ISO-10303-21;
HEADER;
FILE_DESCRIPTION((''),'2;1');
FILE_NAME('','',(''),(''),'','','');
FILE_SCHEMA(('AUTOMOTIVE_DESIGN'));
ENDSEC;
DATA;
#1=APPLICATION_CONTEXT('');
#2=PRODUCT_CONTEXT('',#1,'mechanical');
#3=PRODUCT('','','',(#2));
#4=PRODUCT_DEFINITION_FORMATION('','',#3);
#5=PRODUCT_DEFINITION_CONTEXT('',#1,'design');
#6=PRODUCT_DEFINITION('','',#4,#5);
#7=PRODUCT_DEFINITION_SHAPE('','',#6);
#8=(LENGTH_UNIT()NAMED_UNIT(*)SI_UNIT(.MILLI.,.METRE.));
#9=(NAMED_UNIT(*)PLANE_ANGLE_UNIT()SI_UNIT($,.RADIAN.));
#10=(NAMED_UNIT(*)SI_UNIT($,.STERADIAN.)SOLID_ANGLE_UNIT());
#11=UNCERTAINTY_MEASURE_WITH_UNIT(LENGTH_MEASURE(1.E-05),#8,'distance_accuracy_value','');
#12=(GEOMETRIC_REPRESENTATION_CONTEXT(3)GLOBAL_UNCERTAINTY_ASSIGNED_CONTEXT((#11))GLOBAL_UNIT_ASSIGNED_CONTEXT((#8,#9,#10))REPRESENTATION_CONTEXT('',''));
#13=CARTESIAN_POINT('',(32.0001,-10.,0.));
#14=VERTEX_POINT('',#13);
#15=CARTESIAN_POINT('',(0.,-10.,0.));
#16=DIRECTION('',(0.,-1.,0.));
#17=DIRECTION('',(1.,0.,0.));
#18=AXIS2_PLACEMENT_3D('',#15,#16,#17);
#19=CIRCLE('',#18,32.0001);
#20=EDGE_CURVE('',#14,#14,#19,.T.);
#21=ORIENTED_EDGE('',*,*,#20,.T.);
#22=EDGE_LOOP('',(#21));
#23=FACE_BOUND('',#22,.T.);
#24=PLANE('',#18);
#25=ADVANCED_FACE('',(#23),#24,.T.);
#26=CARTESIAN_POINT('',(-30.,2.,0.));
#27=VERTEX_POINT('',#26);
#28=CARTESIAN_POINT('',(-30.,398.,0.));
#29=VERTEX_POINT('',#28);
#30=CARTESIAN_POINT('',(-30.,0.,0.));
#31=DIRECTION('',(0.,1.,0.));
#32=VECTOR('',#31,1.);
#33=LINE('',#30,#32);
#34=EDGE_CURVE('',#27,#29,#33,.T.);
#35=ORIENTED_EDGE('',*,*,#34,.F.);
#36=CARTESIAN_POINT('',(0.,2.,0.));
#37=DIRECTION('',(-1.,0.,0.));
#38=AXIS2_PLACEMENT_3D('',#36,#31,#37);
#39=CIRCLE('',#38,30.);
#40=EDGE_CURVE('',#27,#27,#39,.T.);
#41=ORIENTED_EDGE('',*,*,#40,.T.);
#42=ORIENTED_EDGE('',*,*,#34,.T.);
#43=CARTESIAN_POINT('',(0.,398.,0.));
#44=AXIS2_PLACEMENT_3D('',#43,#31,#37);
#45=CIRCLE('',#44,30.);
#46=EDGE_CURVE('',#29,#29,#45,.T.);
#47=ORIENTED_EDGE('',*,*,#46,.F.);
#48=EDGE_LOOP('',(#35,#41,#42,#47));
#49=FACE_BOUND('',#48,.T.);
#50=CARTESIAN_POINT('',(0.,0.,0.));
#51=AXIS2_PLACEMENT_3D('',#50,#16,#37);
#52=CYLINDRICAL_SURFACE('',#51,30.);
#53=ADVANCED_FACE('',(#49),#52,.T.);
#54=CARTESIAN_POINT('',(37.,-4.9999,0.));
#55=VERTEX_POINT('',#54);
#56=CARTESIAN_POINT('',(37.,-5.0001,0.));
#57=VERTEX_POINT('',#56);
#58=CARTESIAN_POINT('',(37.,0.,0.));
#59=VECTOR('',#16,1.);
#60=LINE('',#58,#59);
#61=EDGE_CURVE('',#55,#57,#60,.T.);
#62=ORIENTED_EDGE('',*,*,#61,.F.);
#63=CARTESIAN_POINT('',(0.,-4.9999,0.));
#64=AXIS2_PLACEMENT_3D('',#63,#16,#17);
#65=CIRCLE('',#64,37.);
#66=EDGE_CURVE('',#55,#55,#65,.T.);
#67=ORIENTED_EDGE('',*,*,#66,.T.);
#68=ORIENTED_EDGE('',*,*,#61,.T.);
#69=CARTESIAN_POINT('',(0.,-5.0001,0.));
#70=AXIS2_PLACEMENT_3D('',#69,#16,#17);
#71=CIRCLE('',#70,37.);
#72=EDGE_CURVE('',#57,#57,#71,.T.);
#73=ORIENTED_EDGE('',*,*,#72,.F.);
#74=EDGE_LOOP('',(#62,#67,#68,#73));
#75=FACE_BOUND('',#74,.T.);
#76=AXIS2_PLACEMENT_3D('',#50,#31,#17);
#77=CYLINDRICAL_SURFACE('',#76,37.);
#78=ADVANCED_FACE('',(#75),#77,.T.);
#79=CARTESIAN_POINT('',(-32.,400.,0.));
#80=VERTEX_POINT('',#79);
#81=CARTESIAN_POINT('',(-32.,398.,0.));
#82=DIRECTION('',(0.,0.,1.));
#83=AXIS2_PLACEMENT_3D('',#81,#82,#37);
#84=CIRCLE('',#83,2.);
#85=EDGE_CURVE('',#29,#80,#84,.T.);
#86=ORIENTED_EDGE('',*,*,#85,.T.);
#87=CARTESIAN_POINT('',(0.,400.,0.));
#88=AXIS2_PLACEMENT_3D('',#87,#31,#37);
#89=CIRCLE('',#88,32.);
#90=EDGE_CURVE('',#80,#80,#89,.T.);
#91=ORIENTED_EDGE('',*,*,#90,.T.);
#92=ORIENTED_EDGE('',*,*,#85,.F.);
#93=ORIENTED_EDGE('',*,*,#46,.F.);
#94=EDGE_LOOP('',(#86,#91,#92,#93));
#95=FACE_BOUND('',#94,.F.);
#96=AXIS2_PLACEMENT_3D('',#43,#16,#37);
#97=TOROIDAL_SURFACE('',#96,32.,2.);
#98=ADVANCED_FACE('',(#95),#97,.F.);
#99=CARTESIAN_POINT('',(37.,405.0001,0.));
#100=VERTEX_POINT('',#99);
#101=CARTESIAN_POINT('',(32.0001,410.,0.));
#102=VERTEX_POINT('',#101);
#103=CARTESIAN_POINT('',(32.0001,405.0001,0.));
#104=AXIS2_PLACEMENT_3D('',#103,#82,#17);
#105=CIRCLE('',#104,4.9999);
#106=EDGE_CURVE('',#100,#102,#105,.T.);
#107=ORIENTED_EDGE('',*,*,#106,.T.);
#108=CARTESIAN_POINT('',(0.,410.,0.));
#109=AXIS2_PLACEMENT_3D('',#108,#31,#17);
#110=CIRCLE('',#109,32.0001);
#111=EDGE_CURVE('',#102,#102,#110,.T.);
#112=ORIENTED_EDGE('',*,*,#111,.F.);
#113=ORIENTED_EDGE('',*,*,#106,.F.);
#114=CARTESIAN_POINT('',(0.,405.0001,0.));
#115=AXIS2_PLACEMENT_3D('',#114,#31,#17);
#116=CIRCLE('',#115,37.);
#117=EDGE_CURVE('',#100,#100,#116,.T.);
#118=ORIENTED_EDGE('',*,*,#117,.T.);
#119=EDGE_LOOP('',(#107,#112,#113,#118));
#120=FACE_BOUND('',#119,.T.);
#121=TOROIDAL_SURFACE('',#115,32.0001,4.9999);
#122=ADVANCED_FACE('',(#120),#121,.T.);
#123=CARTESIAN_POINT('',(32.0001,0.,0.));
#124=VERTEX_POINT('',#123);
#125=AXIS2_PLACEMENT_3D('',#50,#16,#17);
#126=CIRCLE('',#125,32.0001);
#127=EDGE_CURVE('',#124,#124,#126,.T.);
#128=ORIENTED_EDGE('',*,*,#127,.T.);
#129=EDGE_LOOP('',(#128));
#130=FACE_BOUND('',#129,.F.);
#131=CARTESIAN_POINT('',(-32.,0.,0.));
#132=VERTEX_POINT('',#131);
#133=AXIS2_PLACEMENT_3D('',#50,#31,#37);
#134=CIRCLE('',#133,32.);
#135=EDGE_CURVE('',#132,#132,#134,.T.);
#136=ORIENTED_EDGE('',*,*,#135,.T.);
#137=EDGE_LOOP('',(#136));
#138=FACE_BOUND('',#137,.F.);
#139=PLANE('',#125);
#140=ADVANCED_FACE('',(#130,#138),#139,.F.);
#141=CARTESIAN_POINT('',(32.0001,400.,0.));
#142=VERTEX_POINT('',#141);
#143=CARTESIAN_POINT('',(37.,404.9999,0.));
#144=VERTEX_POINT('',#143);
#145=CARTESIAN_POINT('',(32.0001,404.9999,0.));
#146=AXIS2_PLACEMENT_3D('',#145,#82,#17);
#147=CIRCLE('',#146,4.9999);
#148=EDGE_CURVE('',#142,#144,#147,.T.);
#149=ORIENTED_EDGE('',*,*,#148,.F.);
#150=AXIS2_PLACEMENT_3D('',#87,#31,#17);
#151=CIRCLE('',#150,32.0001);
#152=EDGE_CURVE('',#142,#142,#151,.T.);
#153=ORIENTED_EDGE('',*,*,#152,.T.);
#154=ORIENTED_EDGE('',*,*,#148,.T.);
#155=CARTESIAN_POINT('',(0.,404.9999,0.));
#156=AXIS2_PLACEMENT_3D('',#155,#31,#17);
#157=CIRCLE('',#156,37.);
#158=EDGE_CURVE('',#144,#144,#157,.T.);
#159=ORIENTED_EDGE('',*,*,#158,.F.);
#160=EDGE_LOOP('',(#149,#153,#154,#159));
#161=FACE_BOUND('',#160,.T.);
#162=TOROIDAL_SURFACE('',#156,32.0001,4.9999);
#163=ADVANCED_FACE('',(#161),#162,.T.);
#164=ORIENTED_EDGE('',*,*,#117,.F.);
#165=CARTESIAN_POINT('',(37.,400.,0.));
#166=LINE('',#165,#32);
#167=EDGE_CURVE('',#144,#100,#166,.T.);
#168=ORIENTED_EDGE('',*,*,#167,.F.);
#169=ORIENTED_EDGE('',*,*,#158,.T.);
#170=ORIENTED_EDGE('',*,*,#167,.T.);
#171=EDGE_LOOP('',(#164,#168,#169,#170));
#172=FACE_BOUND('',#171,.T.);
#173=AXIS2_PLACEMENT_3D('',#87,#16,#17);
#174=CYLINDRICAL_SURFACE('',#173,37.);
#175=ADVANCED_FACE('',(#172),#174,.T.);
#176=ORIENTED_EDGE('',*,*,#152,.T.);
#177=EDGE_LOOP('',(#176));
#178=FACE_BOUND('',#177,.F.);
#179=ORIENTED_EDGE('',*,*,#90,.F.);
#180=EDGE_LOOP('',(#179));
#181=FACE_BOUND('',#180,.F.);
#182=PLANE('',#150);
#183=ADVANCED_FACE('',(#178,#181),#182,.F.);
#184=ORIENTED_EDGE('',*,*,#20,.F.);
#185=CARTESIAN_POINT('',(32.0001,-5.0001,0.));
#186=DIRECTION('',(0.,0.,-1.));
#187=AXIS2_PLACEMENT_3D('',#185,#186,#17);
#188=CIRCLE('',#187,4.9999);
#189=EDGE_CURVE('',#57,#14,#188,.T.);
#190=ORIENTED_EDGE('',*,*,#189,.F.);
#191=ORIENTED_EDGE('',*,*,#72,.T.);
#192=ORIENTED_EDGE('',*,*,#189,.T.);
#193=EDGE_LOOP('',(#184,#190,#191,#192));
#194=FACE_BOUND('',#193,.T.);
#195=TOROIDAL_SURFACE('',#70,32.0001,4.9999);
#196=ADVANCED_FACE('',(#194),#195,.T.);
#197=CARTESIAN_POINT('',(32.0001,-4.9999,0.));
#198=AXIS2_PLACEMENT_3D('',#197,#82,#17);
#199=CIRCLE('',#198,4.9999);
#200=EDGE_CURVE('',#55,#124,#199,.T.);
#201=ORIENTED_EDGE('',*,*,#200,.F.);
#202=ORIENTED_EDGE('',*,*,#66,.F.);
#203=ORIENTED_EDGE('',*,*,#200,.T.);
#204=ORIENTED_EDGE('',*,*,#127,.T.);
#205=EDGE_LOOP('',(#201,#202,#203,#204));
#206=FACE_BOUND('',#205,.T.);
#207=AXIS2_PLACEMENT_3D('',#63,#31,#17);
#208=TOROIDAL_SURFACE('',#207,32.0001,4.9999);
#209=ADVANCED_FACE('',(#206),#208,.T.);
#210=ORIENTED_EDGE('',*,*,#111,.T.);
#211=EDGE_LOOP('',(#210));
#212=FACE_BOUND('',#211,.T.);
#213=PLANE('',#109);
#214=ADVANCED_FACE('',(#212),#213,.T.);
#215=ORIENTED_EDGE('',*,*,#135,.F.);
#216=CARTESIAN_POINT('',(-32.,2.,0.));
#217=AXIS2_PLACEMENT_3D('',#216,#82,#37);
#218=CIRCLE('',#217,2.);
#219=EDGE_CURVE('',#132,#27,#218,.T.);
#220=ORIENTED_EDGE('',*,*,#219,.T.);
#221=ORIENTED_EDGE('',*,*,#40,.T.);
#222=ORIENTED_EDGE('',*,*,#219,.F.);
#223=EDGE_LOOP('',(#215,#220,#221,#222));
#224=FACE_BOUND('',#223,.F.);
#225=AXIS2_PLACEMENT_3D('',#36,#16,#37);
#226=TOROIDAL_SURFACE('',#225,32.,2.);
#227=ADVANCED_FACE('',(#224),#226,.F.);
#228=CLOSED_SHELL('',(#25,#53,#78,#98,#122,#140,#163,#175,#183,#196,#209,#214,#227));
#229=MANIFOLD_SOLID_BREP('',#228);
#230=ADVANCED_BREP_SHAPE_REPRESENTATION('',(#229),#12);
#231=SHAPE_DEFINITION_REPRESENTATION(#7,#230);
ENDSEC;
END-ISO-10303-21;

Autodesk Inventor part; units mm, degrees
ref_plane "YZ Plane" through (0, 0, 0) normal (1, 0, 0) x (0, 1, 0)
ref_plane "XZ Plane" through (0, 0, 0) normal (0, 1, 0) x (-1, 0, 0)
ref_plane "XY Plane" through (0, 0, 0) normal (0, 0, 1) x (1, 0, 0)
sketch "草图1" plane through (0, 0, 0) normal (0, 1, 0) x (-1, 0, 0)
  circle A0 centre (0, 0) radius 30
  dimension "d0" = 60
extrude "拉伸1" add sketch "草图1" along normal blind 400
sketch "草图2" plane through (0, 400, 0) normal (0, 1, 0) x (1, 0, 0)
  circle A0 centre (0, 0) radius 37
extrude "拉伸2" add sketch "草图2" along normal blind 10
sketch "草图3" plane through (0, 0, 0) normal (0, -1, 0) x (1, 0, 0)
  circle A0 centre (0, 0) radius 37
extrude "拉伸3" add sketch "草图3" along normal blind 10
fillet "圆角1" radius 5 4 edges at (-37, 410, 0) (-37, 400, 0) (-37, 0, 0) (-37, -10, 0)
fillet "圆角2" radius 2 2 edges at (30, 400, 0) (30, 0, 0)
properties part number "销钉" material "钢，高强度，低合金"
